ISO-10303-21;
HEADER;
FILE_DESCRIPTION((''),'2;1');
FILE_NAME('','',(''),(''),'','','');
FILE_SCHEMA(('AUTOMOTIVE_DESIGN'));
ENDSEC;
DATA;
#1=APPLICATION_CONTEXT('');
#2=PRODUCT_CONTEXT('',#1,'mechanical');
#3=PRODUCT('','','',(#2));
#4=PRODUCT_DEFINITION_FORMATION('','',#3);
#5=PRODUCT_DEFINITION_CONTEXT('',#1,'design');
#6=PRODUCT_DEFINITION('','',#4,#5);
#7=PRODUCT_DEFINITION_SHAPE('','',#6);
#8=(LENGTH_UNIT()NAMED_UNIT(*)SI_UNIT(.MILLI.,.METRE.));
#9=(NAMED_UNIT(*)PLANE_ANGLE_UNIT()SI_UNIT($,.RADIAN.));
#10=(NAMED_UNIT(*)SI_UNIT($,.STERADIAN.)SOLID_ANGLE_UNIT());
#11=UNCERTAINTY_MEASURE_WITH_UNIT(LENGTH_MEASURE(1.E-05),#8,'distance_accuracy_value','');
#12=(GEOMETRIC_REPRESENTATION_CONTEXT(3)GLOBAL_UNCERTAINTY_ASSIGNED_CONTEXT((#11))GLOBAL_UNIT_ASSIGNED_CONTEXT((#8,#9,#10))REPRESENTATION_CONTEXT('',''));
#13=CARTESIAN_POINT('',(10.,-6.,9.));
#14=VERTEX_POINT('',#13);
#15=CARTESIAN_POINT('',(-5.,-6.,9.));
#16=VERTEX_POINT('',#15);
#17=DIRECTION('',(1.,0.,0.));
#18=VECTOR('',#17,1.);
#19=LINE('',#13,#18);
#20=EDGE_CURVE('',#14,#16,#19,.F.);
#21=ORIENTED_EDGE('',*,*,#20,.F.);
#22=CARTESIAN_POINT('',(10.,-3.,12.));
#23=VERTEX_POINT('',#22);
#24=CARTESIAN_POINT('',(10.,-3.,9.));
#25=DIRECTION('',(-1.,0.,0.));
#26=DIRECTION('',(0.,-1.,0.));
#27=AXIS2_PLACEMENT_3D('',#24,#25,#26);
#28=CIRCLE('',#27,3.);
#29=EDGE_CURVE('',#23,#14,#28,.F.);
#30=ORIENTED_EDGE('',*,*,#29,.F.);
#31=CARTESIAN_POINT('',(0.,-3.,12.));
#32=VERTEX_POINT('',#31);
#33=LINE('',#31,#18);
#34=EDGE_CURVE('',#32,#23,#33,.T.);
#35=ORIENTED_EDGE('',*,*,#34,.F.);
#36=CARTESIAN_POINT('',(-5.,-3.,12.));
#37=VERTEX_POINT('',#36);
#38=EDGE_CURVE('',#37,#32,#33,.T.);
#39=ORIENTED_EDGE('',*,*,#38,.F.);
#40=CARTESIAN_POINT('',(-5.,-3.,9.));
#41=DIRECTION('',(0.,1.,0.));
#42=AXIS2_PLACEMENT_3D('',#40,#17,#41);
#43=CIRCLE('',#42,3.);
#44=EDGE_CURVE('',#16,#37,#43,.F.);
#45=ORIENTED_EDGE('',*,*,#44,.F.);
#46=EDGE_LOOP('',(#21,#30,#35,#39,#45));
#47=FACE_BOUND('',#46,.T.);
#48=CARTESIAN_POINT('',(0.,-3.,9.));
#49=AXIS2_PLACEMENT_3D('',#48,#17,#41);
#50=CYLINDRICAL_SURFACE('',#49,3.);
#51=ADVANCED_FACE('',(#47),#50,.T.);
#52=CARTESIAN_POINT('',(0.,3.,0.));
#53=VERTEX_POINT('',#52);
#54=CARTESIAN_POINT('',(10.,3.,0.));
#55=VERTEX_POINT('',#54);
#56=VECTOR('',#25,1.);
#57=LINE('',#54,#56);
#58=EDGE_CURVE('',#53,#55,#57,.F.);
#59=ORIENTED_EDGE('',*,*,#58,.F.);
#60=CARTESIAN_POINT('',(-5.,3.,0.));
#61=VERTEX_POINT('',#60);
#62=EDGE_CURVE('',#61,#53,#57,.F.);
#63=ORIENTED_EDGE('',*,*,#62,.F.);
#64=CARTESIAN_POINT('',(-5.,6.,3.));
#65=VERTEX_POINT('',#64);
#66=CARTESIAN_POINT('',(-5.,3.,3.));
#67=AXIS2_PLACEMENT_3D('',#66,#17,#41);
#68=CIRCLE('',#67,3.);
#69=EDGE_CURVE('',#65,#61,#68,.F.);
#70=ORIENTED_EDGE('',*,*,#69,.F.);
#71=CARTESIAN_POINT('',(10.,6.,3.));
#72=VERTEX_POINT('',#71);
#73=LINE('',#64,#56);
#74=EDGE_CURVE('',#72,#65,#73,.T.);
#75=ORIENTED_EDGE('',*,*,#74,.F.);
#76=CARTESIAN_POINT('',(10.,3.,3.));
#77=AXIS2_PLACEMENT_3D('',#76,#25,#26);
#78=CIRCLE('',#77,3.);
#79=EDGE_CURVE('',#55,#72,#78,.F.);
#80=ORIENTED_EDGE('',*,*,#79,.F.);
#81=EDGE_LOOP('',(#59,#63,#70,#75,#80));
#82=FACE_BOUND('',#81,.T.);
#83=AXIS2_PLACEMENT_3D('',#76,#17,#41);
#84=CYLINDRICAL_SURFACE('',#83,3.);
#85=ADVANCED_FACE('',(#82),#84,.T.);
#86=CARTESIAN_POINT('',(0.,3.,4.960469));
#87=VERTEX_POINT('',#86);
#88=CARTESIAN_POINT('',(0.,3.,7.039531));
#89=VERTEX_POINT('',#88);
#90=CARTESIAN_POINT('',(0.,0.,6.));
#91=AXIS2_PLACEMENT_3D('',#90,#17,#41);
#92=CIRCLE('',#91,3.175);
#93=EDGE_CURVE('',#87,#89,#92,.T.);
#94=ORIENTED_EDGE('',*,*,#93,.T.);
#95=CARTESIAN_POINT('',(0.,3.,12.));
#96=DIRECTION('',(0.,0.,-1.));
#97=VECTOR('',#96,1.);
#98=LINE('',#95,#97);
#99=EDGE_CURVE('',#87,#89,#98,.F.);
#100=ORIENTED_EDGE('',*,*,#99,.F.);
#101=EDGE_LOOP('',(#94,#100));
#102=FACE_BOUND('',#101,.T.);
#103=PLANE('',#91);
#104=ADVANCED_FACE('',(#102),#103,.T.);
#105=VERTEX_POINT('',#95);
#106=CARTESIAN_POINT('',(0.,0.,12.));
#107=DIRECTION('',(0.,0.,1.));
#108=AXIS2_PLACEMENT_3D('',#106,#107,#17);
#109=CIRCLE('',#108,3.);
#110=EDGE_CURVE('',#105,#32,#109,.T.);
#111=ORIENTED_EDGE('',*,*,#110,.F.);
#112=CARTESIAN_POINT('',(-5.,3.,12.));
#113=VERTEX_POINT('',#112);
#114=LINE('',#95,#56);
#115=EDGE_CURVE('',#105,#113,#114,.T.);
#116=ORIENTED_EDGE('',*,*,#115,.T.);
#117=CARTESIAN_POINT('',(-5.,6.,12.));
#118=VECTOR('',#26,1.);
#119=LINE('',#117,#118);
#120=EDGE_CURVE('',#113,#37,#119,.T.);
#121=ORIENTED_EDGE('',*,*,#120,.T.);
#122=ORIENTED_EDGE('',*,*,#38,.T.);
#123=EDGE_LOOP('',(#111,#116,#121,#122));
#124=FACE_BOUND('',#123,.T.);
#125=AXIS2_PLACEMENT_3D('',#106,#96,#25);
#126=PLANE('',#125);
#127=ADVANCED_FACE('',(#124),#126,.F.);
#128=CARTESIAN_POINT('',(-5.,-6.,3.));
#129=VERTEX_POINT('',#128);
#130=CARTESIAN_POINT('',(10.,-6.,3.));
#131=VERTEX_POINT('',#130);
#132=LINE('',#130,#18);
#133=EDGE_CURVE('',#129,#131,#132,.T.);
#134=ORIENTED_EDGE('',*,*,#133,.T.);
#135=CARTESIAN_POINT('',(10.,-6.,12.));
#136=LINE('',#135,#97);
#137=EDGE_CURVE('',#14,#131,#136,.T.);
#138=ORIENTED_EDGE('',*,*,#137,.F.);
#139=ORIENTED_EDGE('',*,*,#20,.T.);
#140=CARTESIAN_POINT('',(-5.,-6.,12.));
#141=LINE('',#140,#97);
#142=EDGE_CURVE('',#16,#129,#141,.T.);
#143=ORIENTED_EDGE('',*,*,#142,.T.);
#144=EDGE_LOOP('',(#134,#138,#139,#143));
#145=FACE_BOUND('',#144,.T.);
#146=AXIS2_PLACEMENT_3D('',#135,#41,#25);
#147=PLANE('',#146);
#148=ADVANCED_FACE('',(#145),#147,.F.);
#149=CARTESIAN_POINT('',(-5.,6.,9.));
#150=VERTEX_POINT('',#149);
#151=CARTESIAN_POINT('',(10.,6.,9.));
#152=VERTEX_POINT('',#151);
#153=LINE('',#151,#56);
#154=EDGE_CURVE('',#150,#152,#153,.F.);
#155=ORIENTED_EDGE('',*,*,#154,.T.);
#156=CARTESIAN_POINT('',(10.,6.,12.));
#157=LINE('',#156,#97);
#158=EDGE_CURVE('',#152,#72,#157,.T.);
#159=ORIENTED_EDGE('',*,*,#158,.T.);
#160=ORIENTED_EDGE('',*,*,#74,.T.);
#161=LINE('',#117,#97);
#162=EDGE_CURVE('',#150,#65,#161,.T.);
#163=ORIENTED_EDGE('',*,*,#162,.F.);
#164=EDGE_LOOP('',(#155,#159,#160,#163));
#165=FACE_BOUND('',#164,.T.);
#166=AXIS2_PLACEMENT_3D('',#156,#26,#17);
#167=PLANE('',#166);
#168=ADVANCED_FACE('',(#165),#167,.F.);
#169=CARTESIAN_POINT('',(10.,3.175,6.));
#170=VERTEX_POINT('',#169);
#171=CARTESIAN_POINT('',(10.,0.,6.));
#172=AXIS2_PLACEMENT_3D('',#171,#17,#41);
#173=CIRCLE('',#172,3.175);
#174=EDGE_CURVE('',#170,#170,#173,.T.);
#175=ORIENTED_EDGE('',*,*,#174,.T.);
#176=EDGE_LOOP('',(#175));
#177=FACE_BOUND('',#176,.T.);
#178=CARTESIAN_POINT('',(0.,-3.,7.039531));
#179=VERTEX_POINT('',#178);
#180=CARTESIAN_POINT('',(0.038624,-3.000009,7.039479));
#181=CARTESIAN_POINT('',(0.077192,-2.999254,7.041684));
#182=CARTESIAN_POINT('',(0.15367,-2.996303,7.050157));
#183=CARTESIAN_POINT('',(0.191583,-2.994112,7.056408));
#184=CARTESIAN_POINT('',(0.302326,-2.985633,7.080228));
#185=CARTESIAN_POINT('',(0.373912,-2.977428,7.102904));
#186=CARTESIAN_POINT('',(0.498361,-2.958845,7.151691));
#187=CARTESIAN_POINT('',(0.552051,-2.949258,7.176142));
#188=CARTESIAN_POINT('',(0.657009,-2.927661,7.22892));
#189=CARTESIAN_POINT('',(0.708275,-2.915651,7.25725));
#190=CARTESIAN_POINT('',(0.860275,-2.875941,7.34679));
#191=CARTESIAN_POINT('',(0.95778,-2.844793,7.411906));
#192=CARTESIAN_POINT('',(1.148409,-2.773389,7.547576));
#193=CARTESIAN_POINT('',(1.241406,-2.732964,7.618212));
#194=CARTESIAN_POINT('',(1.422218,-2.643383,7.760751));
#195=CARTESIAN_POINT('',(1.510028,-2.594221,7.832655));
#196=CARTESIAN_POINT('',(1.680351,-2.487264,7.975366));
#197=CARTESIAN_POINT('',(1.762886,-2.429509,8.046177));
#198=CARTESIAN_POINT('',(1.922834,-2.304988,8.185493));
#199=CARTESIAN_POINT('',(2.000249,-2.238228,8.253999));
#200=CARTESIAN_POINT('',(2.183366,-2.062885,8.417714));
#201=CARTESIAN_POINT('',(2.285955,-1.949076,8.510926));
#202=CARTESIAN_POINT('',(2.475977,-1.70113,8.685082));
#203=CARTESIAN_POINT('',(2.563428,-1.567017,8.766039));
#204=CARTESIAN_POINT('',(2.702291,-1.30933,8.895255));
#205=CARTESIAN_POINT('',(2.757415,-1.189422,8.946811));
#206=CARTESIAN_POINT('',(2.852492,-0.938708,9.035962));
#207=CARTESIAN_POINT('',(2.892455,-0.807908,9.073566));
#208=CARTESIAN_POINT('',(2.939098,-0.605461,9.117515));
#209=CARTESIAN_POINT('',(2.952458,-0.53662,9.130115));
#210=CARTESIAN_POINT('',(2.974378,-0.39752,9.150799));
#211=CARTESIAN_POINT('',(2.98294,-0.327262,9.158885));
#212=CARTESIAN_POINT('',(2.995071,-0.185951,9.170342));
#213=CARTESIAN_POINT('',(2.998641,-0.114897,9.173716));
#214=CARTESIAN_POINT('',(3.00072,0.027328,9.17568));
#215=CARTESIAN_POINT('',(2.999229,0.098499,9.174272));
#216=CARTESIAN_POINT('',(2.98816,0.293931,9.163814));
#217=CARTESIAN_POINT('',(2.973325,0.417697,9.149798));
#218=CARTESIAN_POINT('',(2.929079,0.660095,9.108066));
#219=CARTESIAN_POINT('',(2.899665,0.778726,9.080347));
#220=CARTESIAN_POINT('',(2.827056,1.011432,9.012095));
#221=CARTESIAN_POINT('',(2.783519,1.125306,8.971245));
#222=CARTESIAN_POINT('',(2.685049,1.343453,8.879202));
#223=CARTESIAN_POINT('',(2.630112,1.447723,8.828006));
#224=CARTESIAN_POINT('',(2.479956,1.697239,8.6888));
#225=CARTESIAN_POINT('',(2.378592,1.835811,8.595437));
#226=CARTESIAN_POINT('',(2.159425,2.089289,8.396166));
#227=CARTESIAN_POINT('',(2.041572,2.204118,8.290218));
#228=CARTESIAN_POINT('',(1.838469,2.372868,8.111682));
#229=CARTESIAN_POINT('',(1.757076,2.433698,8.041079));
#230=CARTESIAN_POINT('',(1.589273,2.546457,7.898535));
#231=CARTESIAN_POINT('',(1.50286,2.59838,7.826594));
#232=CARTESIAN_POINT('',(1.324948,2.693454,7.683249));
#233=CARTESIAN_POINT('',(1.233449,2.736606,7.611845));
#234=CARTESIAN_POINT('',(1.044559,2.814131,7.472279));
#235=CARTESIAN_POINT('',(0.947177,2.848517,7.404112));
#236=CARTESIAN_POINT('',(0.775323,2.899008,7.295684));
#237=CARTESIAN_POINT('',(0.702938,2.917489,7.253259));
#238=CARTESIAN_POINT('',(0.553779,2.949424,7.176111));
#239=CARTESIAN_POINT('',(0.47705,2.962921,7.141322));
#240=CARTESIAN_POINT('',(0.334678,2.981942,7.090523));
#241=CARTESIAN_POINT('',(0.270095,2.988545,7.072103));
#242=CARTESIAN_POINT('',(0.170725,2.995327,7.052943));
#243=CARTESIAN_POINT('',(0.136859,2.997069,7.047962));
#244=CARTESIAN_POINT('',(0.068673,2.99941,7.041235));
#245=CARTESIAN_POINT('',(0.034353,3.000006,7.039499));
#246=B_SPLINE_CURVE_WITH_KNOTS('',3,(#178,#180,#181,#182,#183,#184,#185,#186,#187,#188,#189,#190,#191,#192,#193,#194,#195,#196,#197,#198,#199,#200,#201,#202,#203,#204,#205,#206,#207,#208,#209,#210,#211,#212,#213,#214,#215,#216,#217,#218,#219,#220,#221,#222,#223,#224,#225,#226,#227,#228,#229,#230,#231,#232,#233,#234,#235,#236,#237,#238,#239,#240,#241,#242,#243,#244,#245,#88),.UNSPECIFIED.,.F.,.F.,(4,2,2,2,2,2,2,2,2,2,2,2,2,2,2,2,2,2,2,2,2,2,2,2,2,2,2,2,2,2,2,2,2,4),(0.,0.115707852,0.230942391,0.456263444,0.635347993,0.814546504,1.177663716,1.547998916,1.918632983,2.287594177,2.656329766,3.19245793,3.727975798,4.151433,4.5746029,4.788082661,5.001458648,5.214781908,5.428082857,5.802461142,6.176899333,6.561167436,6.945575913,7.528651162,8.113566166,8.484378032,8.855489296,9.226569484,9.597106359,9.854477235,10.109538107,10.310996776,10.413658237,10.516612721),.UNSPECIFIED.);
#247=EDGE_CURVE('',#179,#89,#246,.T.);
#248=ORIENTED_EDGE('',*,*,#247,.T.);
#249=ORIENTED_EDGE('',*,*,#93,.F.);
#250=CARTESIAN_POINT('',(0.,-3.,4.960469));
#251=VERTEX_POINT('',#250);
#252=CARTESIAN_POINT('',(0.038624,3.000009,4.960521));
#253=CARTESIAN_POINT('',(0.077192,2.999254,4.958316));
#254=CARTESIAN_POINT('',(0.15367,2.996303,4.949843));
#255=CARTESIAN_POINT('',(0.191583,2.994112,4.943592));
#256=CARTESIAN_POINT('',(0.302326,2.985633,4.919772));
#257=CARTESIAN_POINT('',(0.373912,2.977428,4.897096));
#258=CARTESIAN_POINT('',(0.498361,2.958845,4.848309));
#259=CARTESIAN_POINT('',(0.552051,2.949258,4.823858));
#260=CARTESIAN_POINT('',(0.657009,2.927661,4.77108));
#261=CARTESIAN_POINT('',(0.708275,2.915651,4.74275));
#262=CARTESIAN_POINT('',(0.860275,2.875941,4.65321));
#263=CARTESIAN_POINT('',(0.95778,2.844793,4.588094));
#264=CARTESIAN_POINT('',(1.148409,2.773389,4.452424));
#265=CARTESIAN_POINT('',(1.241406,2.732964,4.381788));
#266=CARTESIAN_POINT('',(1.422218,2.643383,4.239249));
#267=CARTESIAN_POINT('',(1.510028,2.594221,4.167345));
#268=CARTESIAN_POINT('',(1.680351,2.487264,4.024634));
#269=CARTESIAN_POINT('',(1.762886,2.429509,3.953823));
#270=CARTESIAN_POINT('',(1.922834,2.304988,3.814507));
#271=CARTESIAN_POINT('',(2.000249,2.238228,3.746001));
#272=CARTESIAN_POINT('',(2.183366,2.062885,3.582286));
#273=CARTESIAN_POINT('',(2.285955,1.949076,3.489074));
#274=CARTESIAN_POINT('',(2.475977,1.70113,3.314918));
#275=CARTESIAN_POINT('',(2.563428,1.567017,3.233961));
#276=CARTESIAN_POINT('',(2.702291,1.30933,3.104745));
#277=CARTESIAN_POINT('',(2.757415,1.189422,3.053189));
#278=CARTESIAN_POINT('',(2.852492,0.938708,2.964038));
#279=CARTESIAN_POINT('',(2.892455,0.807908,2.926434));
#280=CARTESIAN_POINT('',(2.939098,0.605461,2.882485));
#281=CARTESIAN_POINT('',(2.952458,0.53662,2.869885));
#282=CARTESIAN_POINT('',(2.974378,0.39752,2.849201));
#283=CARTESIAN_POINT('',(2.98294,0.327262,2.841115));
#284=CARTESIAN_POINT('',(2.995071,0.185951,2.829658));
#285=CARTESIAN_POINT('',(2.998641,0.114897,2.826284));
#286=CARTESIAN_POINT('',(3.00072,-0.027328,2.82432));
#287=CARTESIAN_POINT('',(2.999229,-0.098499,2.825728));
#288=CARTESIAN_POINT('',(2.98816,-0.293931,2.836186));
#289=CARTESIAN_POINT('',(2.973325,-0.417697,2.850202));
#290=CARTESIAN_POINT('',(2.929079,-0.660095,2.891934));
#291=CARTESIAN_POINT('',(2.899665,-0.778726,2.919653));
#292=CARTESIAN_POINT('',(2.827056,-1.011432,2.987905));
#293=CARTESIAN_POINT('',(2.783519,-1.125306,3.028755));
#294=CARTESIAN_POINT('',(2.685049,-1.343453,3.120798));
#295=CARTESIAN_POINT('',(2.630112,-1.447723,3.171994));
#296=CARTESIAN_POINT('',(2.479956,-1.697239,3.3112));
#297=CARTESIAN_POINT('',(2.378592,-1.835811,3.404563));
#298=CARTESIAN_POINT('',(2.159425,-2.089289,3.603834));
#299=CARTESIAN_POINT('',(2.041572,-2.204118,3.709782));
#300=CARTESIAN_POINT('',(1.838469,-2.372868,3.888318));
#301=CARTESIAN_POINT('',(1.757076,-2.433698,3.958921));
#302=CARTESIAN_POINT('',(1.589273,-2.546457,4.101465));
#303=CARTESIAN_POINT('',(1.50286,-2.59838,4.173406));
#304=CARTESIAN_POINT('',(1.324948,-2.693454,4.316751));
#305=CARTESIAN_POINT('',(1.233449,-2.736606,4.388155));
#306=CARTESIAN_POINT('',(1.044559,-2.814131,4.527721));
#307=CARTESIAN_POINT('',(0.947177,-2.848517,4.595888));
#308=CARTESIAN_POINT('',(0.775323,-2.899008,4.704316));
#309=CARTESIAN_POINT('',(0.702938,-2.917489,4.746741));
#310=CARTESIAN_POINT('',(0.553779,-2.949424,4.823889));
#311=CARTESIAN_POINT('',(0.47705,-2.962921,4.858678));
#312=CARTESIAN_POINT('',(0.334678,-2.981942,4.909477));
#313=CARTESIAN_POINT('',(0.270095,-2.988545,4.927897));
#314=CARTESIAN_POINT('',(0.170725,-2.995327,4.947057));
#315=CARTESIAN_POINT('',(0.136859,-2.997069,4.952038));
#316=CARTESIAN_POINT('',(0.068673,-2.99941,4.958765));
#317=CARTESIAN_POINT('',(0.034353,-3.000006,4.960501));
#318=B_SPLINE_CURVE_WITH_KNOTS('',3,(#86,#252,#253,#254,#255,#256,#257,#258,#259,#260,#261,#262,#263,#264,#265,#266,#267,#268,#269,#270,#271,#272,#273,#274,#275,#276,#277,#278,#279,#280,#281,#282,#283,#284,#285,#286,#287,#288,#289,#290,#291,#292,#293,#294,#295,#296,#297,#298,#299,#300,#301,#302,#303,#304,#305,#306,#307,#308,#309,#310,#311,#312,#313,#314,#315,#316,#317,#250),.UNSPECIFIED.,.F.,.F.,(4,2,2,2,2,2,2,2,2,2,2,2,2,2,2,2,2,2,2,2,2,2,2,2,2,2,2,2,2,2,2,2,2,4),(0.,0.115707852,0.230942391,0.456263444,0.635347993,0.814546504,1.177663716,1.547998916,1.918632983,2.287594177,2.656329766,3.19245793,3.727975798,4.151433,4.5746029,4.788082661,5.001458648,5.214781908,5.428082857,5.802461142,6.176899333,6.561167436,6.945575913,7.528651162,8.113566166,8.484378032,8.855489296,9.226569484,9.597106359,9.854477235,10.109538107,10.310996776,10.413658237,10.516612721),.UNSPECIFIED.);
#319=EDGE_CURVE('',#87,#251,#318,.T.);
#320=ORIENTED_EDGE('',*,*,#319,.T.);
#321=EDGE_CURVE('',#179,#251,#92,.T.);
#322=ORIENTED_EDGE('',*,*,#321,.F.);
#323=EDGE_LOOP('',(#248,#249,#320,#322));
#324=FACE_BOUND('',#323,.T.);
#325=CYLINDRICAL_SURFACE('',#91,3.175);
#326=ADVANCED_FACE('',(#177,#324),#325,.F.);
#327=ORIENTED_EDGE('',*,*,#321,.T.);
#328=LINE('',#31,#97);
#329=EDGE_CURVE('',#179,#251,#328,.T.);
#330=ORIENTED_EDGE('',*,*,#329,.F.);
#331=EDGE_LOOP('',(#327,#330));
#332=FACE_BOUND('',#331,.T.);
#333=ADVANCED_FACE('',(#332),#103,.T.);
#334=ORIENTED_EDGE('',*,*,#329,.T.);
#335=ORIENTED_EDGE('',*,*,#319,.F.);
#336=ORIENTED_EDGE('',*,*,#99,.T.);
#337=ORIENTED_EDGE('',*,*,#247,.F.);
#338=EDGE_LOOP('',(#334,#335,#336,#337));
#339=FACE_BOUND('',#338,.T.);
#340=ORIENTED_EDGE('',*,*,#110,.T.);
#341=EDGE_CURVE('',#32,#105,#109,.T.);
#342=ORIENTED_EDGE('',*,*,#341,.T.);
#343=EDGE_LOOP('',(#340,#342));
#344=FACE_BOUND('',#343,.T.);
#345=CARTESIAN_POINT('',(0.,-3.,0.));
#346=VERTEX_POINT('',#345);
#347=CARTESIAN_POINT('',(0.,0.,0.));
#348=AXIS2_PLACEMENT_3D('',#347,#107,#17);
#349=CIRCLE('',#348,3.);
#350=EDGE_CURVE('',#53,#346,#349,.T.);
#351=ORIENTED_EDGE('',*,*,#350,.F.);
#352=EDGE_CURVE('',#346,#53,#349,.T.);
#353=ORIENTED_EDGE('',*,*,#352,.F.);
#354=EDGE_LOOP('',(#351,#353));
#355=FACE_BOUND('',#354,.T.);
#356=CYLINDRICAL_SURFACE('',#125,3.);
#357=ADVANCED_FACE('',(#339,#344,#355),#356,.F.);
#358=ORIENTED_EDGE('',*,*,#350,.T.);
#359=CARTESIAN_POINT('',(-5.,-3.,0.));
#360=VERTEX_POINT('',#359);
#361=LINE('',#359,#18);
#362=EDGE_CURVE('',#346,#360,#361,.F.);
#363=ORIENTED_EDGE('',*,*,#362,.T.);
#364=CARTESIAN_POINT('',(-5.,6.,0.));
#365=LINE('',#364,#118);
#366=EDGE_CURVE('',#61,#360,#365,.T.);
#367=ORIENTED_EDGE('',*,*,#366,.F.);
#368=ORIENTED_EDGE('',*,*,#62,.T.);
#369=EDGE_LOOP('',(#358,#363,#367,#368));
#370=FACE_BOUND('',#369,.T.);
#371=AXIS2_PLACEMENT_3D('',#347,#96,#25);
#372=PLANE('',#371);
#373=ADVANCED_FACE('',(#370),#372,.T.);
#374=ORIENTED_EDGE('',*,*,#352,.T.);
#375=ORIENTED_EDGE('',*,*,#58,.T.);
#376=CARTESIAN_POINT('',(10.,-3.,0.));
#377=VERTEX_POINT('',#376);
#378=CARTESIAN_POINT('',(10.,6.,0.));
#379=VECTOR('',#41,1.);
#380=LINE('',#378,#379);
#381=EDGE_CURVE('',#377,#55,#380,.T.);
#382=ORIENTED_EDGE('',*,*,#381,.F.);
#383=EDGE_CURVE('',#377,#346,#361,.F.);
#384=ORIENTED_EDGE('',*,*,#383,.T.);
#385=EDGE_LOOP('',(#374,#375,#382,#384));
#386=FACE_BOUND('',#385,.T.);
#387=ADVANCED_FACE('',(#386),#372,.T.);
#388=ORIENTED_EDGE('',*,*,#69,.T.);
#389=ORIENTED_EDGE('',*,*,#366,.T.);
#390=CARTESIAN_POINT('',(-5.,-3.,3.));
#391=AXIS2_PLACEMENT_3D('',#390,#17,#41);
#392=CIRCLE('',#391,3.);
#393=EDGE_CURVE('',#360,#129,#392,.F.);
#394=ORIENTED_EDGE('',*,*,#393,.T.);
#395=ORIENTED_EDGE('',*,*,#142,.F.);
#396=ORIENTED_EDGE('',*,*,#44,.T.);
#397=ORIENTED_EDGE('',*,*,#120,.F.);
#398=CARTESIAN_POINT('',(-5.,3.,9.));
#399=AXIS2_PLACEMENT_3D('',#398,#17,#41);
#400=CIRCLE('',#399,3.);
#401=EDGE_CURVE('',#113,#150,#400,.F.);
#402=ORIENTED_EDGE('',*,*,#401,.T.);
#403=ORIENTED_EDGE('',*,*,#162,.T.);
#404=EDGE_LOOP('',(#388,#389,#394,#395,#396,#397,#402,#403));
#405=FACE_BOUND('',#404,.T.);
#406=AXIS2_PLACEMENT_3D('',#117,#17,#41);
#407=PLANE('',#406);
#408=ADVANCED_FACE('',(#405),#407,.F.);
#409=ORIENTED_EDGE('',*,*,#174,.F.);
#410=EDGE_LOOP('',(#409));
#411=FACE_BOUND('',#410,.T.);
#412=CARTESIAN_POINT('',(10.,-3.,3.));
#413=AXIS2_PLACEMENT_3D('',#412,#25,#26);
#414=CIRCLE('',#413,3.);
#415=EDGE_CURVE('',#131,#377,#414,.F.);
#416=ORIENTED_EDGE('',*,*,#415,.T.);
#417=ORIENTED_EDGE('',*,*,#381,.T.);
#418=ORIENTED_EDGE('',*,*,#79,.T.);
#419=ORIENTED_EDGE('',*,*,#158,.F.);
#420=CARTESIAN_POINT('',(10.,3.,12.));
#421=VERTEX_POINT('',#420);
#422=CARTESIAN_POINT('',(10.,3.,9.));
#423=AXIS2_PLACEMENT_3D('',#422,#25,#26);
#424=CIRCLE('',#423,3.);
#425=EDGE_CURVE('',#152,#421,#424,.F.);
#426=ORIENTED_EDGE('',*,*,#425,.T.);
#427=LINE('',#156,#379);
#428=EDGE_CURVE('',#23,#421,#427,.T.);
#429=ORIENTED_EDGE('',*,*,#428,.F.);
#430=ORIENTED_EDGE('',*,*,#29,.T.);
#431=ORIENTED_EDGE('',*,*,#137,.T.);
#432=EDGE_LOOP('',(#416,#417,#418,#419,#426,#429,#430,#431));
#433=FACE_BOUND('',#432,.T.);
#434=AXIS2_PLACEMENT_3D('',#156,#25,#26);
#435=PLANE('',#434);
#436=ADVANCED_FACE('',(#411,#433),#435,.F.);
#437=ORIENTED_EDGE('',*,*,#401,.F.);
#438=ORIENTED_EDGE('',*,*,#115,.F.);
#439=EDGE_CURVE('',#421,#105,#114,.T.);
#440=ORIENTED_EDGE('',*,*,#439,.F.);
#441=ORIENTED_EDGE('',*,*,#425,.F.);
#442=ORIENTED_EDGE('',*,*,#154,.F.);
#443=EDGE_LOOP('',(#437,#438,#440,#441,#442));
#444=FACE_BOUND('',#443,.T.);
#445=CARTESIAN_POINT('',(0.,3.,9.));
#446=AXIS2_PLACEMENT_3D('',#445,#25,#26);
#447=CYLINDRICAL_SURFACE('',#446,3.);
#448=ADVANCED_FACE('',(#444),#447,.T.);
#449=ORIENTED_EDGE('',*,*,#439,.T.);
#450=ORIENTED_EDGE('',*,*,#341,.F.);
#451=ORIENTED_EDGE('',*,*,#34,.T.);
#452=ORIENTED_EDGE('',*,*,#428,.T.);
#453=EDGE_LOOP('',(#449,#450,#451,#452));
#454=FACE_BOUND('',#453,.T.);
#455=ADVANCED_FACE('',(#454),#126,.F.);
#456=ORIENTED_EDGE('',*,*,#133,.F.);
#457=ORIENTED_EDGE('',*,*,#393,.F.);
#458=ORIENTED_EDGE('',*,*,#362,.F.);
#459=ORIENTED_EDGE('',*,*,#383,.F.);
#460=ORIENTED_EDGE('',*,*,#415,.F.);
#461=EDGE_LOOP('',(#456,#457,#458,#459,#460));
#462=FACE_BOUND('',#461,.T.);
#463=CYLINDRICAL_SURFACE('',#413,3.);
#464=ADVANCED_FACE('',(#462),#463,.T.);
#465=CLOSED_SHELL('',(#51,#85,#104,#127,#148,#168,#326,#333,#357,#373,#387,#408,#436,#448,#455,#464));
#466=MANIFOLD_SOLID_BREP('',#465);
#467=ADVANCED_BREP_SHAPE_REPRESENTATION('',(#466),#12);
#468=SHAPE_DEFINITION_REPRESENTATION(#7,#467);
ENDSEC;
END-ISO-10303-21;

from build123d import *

# Parameters (mm, degrees)
SKETCH1_W           = 15
SKETCH1_H           = 12
SKETCH1_R           = 3
BOSS_EXTRUDE1_DEPTH = 12
SKETCH2_R           = 3.175
CUT_EXTRUDE1_DEPTH  = 10
FILLET1_R           = 3


with BuildPart() as part:
    # Sketch1 → Boss-Extrude1 (new body)
    with BuildSketch(Plane.XY):
        with Locations((2.5, 0)):
            Rectangle(SKETCH1_W, SKETCH1_H)
        Circle(SKETCH1_R, mode=Mode.SUBTRACT)
    extrude(amount=BOSS_EXTRUDE1_DEPTH)

    # Sketch2 → Cut-Extrude1 (cut)
    with BuildSketch(Plane(origin=(10, 0, 0), x_dir=(0, 0, -1), z_dir=(1, 0, 0))):
        with Locations(Location((-6, 0, 0), (0, 0, 90))):
            Circle(SKETCH2_R)
    extrude(amount=-CUT_EXTRUDE1_DEPTH, mode=Mode.SUBTRACT)

    # Fillet1
    fillet1_edges = [part.edges().sort_by_distance(p)[0] for p in [
        (2.5, 6, 12),
        (2.5, 6, 0),
        (2.5, -6, 0),
        (2.5, -6, 12),
    ]]
    fillet(fillet1_edges, radius=FILLET1_R - 0.0001)  # a hair under: the kernel refuses the full size


solid = part.part
